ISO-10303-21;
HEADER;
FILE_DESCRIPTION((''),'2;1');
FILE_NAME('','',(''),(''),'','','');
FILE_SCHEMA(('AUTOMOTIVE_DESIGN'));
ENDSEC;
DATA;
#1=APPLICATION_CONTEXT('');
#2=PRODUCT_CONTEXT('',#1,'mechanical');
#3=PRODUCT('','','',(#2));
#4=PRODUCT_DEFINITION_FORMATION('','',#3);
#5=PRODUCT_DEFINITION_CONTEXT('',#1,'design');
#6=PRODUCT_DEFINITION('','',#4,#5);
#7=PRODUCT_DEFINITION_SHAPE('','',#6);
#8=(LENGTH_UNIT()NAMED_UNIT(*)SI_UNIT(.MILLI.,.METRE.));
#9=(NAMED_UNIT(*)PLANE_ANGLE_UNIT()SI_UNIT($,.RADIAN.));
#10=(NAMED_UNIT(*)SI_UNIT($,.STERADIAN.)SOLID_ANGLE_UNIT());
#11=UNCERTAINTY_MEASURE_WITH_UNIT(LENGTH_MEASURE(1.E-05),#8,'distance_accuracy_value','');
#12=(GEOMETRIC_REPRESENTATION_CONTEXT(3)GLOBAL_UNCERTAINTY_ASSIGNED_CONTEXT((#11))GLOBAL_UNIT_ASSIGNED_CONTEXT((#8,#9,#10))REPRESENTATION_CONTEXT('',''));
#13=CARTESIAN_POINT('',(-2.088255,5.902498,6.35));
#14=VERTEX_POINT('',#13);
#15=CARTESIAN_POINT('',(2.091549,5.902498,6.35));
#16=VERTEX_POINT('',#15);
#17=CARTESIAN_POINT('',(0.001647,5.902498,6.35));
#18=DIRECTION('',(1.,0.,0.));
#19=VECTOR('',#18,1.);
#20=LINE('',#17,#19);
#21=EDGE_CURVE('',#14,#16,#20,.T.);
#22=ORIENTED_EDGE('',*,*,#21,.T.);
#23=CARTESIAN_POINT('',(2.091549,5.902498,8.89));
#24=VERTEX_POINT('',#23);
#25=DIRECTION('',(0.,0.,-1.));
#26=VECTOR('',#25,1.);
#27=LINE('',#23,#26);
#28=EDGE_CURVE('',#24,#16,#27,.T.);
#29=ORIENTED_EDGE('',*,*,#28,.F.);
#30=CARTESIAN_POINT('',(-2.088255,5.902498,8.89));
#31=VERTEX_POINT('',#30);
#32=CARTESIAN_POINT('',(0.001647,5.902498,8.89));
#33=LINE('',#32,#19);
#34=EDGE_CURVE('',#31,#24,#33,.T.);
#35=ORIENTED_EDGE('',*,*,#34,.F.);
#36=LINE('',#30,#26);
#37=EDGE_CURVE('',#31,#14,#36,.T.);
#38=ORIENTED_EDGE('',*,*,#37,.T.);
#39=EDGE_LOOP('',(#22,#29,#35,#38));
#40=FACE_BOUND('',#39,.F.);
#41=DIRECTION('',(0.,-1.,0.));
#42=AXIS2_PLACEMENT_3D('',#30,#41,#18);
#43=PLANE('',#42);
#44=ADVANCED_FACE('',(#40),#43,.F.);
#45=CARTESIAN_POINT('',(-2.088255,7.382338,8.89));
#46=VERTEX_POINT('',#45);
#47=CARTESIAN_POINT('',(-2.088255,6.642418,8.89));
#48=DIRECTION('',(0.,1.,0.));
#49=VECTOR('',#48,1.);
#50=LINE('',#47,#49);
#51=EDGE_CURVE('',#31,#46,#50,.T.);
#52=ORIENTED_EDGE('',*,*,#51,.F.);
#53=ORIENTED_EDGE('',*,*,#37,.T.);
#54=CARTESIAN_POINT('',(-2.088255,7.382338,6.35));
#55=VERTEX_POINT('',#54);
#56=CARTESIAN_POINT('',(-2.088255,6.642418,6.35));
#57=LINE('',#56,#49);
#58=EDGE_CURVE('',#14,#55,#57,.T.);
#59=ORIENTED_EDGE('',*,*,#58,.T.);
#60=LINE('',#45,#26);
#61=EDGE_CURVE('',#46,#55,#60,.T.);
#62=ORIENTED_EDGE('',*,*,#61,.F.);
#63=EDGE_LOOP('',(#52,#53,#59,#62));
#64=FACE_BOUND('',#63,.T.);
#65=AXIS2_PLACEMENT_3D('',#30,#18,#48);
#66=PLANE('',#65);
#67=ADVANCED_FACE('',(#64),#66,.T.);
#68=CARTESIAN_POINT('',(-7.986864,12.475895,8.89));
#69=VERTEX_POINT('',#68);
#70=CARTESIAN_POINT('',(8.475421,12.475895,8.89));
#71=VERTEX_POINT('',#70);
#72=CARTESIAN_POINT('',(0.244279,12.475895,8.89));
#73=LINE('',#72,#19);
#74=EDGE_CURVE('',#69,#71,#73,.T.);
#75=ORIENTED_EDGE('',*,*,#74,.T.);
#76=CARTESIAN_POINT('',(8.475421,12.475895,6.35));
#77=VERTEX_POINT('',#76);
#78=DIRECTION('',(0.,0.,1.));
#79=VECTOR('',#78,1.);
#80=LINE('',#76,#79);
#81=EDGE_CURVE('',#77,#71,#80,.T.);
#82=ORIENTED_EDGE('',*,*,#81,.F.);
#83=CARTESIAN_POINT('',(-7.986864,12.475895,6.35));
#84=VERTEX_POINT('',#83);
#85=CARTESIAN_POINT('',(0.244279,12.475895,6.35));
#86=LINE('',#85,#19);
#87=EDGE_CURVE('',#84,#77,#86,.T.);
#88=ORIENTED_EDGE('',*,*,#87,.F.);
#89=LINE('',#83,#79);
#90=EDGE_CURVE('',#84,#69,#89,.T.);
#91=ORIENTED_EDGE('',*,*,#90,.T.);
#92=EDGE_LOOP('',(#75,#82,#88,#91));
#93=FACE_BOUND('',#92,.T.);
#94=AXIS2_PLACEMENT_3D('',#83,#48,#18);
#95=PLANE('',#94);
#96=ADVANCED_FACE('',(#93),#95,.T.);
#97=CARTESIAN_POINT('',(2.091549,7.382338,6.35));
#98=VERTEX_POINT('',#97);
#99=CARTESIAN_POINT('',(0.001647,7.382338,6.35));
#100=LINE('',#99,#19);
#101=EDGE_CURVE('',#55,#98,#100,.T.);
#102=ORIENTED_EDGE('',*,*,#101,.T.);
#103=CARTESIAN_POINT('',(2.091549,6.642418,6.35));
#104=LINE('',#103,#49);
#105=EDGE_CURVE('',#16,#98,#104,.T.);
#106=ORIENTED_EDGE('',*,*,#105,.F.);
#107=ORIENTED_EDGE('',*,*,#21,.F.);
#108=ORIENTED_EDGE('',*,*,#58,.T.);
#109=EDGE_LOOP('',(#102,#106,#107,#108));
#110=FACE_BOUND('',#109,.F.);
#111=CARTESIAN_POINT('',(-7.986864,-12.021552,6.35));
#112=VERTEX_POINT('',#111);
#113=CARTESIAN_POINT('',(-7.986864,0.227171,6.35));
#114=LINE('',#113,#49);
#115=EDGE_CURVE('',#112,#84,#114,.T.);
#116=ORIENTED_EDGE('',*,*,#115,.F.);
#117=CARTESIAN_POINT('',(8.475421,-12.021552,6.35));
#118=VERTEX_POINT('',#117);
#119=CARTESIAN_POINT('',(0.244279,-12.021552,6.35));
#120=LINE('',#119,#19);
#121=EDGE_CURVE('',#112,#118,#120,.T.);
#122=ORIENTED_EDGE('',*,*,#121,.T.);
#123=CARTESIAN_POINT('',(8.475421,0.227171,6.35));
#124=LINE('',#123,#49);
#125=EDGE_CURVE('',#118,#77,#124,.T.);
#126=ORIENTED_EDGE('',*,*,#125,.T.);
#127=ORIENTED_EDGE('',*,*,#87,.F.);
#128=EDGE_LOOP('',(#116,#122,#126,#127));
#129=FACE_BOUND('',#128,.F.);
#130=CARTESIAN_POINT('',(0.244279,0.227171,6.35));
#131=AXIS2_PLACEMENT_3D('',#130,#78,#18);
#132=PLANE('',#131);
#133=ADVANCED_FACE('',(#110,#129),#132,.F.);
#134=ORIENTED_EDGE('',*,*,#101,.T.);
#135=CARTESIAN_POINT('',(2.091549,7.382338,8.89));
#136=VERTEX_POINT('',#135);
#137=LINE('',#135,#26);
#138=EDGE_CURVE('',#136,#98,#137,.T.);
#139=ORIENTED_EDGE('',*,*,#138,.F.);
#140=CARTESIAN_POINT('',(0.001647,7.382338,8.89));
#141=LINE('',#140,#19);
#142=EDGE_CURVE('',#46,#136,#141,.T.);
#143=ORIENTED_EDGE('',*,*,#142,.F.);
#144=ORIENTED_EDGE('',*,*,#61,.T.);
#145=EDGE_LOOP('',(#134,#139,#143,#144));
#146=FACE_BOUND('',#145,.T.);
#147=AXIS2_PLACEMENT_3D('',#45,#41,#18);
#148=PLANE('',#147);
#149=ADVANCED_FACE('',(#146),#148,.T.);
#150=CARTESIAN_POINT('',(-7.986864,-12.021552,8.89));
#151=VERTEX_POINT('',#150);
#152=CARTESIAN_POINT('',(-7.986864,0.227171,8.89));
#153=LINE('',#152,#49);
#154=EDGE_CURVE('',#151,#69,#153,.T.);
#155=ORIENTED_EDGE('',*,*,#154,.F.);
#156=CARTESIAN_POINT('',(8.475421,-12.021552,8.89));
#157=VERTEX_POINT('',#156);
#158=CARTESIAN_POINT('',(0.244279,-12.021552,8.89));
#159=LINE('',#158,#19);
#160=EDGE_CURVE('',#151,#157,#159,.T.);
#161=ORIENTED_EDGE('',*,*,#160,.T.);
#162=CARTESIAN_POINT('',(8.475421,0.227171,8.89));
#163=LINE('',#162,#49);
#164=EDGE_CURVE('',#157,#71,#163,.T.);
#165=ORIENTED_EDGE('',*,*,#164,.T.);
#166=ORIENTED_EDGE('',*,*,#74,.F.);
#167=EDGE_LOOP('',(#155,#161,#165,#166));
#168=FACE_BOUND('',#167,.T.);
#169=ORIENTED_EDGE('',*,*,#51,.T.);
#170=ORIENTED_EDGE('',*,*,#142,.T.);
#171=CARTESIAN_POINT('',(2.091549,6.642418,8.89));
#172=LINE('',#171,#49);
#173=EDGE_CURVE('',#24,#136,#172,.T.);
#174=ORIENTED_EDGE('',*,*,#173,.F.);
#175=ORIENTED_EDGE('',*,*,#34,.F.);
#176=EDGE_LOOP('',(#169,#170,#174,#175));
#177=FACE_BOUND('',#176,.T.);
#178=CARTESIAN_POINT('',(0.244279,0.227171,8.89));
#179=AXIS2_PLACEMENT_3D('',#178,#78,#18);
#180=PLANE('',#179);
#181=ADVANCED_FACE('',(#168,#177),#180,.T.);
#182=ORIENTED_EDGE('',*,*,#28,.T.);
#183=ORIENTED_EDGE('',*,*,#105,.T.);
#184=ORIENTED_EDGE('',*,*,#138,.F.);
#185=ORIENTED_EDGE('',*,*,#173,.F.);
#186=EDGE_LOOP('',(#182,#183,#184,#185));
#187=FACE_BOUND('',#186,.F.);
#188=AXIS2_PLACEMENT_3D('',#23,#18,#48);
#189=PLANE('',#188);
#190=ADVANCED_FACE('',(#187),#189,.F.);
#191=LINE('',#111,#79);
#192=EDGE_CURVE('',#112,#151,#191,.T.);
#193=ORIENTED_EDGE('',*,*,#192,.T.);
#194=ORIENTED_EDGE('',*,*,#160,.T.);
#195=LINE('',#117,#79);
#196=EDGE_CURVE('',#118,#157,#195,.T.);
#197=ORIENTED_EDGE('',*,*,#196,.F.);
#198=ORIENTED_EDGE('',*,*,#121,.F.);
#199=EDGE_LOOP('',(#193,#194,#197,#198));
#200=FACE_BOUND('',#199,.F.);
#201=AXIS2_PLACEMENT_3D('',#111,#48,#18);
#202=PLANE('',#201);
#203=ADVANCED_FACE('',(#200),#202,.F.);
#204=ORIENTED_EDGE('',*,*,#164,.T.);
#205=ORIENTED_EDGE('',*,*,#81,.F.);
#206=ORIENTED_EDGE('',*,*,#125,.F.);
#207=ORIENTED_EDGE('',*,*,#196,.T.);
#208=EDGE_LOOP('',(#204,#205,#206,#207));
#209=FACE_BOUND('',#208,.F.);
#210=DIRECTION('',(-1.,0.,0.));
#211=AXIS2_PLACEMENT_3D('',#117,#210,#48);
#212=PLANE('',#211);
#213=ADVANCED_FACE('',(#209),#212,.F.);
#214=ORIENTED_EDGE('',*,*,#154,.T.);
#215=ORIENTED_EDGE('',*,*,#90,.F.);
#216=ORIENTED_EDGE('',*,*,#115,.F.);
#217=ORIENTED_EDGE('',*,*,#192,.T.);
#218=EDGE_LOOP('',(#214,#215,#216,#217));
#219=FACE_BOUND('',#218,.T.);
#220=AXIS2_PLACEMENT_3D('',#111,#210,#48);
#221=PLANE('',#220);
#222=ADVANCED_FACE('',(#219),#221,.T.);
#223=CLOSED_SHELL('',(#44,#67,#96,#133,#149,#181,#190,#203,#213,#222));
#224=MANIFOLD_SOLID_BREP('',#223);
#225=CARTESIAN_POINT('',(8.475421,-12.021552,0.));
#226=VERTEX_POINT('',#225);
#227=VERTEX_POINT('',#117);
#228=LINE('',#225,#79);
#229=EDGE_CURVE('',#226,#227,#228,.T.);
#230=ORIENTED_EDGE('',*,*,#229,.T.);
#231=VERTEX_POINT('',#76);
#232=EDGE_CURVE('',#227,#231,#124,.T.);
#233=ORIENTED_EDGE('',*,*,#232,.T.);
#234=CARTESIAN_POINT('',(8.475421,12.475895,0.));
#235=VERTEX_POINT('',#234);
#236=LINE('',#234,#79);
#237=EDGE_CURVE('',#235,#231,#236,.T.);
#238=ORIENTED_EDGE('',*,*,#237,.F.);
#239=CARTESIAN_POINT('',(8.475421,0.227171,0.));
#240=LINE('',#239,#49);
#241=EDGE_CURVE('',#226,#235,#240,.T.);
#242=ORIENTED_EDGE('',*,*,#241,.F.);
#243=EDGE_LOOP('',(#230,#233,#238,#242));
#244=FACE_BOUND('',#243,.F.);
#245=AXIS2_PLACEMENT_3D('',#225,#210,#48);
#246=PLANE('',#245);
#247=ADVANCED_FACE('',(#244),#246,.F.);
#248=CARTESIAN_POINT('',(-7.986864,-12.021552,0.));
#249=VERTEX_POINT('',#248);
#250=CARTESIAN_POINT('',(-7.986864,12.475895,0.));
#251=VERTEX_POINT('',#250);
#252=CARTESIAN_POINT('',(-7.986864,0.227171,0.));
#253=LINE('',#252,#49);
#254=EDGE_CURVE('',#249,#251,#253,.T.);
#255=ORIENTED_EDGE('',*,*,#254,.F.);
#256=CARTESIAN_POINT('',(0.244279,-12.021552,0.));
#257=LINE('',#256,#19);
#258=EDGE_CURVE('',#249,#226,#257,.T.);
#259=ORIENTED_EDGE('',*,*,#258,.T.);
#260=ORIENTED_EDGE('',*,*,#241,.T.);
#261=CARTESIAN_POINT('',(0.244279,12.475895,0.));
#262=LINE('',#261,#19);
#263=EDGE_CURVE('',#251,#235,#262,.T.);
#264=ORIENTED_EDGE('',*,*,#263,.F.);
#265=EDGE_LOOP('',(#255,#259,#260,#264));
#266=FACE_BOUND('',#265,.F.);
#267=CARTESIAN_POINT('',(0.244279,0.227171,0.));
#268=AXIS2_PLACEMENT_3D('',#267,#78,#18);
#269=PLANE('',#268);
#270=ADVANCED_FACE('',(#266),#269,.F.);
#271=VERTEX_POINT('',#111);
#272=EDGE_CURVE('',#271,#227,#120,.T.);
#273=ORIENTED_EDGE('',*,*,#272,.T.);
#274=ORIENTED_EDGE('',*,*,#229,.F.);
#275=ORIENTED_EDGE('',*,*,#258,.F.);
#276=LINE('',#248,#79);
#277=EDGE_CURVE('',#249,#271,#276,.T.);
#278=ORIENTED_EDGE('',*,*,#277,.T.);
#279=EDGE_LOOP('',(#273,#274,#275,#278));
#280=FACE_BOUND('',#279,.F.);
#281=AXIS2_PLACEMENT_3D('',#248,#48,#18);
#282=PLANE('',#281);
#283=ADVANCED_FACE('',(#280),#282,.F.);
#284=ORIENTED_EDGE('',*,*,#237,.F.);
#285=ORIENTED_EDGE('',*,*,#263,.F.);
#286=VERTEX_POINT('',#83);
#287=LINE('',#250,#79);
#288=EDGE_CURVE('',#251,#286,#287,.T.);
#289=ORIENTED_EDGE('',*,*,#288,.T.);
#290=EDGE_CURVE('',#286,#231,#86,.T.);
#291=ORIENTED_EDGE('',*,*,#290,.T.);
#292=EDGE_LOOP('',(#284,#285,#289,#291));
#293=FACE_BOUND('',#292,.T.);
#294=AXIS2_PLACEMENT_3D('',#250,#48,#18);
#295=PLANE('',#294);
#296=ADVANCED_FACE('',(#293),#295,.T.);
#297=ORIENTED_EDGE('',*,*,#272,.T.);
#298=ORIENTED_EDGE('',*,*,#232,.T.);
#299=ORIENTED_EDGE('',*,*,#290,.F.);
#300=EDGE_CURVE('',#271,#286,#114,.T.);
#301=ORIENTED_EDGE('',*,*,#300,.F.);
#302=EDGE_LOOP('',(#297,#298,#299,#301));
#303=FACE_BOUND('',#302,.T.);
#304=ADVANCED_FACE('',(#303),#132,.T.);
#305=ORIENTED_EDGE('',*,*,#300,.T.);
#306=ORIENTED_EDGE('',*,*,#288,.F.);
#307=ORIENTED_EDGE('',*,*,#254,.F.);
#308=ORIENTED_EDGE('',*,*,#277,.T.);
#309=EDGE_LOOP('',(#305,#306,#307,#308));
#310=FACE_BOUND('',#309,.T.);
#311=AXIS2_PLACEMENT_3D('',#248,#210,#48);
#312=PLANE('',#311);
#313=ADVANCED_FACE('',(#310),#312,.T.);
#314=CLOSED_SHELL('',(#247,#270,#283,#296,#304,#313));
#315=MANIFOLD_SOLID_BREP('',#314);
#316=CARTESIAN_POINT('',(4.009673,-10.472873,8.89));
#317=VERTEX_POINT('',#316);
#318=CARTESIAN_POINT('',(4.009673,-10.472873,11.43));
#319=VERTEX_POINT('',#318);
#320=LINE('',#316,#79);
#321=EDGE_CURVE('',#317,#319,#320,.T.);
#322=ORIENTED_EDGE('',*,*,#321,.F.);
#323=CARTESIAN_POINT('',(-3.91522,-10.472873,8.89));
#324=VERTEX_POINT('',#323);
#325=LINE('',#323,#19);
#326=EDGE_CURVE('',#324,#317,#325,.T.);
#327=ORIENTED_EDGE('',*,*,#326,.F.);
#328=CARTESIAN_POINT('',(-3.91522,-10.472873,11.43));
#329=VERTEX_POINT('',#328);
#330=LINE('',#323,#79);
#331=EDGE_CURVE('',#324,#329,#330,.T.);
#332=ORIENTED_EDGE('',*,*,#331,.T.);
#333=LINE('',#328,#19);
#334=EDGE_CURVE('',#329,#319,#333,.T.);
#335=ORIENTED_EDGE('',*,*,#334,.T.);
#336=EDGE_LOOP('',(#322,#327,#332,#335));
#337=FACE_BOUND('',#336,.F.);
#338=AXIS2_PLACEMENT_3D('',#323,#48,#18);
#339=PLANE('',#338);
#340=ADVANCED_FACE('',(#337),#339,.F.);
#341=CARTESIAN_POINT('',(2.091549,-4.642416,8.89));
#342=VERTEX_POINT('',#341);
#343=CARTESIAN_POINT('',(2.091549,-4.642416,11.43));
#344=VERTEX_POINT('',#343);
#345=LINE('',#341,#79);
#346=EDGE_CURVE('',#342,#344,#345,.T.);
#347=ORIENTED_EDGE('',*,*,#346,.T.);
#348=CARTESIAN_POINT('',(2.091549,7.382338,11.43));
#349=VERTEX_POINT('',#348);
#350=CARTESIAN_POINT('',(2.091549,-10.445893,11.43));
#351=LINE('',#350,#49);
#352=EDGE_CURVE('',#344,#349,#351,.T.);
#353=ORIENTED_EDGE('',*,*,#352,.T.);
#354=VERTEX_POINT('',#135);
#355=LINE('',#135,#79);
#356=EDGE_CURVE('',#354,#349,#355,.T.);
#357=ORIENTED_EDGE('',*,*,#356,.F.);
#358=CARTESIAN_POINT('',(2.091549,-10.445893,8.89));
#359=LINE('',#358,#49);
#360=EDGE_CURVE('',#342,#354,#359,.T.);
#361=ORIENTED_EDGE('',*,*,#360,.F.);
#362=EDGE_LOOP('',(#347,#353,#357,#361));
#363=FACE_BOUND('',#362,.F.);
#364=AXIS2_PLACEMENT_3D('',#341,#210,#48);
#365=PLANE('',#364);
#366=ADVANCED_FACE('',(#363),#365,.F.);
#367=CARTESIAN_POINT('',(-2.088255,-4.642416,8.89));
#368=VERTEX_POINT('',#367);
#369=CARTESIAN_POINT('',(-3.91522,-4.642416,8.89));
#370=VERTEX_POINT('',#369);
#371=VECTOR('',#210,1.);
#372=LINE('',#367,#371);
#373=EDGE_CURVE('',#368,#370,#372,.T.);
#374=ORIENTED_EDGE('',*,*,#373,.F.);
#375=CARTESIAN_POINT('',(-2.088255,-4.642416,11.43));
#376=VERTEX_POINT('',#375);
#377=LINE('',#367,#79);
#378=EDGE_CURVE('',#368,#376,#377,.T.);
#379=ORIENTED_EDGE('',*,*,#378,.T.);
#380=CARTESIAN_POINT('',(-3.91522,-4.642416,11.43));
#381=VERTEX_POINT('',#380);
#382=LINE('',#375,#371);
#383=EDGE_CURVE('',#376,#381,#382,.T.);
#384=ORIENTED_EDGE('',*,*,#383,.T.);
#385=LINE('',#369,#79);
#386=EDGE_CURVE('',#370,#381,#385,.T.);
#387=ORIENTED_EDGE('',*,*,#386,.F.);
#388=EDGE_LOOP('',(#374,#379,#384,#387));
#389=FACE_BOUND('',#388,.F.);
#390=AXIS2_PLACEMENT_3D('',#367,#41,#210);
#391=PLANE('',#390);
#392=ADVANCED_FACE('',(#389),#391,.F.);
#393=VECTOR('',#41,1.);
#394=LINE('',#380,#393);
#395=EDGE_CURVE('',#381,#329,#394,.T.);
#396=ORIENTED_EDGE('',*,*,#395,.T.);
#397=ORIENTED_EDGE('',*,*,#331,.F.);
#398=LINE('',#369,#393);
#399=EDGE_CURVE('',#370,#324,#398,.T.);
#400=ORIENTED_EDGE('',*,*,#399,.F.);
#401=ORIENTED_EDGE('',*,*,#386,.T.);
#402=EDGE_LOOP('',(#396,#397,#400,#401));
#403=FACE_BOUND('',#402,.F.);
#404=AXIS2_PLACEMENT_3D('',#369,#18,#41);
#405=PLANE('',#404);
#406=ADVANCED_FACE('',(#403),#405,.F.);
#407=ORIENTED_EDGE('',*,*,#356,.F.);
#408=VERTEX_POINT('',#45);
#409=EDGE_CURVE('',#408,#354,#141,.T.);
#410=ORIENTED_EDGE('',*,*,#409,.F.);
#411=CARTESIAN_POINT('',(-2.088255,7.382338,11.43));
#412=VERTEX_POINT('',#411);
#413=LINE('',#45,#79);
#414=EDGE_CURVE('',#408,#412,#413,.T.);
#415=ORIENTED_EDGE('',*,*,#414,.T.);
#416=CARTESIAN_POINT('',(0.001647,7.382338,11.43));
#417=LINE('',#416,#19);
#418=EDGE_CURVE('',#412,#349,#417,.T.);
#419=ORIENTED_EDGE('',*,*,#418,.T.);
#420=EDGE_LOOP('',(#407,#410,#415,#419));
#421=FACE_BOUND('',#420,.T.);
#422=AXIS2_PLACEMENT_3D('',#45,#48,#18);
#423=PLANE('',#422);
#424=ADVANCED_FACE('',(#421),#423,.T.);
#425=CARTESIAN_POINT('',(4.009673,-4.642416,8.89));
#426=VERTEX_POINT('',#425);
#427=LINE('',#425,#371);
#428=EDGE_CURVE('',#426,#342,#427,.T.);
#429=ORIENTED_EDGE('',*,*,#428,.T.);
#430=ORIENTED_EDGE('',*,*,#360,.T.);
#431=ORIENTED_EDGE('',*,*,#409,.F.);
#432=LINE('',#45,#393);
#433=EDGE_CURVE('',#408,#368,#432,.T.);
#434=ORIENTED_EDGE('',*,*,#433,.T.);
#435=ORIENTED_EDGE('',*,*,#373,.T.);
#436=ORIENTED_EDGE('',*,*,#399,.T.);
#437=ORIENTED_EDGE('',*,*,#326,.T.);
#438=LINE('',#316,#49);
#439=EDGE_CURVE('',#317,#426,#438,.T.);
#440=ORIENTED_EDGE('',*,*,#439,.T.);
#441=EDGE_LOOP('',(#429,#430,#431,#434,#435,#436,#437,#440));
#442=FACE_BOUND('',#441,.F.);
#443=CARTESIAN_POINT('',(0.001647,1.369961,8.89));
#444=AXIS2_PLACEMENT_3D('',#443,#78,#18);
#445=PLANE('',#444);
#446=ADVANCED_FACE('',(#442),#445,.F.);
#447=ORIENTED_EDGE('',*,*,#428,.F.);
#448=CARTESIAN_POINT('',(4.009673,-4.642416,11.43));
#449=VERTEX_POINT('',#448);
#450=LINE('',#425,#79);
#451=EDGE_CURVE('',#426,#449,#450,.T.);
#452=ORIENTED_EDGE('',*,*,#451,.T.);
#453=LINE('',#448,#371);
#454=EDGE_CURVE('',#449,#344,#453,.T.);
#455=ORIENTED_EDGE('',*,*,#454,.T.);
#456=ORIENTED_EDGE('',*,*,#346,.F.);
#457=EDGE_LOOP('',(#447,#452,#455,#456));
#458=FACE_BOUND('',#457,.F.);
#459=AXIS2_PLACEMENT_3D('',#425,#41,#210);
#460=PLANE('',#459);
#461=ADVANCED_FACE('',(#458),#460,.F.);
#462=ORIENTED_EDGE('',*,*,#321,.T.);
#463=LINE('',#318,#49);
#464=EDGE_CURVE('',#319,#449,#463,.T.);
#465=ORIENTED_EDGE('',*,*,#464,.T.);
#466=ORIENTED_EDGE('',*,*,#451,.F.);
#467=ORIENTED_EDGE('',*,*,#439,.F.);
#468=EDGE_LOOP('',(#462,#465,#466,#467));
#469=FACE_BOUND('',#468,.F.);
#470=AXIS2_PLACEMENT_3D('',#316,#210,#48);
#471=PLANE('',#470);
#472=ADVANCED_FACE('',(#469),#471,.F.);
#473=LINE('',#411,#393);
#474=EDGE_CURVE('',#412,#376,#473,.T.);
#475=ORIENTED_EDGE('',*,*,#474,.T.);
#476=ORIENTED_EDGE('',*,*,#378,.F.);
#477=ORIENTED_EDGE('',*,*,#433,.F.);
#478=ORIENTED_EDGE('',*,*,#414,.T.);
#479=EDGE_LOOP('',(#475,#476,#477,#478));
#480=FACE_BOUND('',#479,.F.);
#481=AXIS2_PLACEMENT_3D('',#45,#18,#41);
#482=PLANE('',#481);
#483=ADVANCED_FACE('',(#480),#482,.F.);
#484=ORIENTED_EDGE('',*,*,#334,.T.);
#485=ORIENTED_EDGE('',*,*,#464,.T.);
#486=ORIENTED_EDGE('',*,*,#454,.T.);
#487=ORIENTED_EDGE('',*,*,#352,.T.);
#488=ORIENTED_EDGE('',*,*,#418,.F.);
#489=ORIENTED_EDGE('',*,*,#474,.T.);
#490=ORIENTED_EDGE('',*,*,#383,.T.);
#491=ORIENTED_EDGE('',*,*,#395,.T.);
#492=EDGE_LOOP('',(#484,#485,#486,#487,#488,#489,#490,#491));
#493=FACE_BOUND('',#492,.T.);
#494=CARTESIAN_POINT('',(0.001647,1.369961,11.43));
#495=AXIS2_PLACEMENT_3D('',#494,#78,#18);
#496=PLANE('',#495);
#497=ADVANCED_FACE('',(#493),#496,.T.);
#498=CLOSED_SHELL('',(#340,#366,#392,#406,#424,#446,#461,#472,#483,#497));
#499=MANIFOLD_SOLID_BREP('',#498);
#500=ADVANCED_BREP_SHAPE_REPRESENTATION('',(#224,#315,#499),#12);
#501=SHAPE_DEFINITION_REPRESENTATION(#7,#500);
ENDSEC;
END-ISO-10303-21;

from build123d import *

# Parameters (mm, degrees)
F0_W     = 16.462284606
F0_H     = 24.4974466041
F1_DEPTH = 6.35
F2_W     = 16.462284606
F2_H     = 24.4974466041
F3_DEPTH = 2.54
F4_W     = 4.1798030725
F4_H     = 1.4798403718
F5_DEPTH = 2.54
F6_W     = 4.1798030725
F6_H     = 12.0247541927
F6_H_2   = 5.8034774847
F7_DEPTH = 2.54


# Not quite as in the source:
# - a feature names something its author has since deleted; it is built from what else it names


with BuildPart() as f1:
    # F0 (on Top) → F1 (new body)
    with BuildSketch(Plane.XY):
        with Locations((0.2442786936, 0.227171462)):
            Rectangle(F0_W, F0_H)
    extrude(amount=F1_DEPTH)


with BuildPart() as f3:
    # F2 (on face) → F3 (new body)
    with BuildSketch(Plane.XY.offset(6.35)):
        with Locations((0.2442786936, 0.227171462)):
            Rectangle(F2_W, F2_H)
    extrude(amount=F3_DEPTH)

    # F4 (on face) → F5 (cut)
    with BuildSketch(Plane.XY.offset(8.89)):
        with Locations((0.0016469858, 6.6424182151)):
            Rectangle(F4_W, F4_H)
    extrude(amount=-F5_DEPTH, mode=Mode.SUBTRACT)


with BuildPart() as f7:
    # F6 (on face) → F7 (new body)
    with BuildSketch(Plane.XY.offset(8.89)):
        with Locations((0.0016469858, 1.3699613046)):
            Rectangle(F6_W, F6_H)
        with Locations((0.0016469858, -7.5441545341)):
            Rectangle(F6_W, F6_H_2)
        Polygon((-2.0882545505, -10.4458932765), (-2.0882545505, -4.6424157917), (-3.9152200043, -4.6424157917), (-3.9152200043, -10.4728732258), (4.009673401, -10.4728732258), (4.009673401, -4.6424157917), (2.091548522, -4.6424157917), (2.091548522, -10.4458932765), align=None)
    extrude(amount=F7_DEPTH)


solid = Compound([f1.part, f3.part, f7.part])
